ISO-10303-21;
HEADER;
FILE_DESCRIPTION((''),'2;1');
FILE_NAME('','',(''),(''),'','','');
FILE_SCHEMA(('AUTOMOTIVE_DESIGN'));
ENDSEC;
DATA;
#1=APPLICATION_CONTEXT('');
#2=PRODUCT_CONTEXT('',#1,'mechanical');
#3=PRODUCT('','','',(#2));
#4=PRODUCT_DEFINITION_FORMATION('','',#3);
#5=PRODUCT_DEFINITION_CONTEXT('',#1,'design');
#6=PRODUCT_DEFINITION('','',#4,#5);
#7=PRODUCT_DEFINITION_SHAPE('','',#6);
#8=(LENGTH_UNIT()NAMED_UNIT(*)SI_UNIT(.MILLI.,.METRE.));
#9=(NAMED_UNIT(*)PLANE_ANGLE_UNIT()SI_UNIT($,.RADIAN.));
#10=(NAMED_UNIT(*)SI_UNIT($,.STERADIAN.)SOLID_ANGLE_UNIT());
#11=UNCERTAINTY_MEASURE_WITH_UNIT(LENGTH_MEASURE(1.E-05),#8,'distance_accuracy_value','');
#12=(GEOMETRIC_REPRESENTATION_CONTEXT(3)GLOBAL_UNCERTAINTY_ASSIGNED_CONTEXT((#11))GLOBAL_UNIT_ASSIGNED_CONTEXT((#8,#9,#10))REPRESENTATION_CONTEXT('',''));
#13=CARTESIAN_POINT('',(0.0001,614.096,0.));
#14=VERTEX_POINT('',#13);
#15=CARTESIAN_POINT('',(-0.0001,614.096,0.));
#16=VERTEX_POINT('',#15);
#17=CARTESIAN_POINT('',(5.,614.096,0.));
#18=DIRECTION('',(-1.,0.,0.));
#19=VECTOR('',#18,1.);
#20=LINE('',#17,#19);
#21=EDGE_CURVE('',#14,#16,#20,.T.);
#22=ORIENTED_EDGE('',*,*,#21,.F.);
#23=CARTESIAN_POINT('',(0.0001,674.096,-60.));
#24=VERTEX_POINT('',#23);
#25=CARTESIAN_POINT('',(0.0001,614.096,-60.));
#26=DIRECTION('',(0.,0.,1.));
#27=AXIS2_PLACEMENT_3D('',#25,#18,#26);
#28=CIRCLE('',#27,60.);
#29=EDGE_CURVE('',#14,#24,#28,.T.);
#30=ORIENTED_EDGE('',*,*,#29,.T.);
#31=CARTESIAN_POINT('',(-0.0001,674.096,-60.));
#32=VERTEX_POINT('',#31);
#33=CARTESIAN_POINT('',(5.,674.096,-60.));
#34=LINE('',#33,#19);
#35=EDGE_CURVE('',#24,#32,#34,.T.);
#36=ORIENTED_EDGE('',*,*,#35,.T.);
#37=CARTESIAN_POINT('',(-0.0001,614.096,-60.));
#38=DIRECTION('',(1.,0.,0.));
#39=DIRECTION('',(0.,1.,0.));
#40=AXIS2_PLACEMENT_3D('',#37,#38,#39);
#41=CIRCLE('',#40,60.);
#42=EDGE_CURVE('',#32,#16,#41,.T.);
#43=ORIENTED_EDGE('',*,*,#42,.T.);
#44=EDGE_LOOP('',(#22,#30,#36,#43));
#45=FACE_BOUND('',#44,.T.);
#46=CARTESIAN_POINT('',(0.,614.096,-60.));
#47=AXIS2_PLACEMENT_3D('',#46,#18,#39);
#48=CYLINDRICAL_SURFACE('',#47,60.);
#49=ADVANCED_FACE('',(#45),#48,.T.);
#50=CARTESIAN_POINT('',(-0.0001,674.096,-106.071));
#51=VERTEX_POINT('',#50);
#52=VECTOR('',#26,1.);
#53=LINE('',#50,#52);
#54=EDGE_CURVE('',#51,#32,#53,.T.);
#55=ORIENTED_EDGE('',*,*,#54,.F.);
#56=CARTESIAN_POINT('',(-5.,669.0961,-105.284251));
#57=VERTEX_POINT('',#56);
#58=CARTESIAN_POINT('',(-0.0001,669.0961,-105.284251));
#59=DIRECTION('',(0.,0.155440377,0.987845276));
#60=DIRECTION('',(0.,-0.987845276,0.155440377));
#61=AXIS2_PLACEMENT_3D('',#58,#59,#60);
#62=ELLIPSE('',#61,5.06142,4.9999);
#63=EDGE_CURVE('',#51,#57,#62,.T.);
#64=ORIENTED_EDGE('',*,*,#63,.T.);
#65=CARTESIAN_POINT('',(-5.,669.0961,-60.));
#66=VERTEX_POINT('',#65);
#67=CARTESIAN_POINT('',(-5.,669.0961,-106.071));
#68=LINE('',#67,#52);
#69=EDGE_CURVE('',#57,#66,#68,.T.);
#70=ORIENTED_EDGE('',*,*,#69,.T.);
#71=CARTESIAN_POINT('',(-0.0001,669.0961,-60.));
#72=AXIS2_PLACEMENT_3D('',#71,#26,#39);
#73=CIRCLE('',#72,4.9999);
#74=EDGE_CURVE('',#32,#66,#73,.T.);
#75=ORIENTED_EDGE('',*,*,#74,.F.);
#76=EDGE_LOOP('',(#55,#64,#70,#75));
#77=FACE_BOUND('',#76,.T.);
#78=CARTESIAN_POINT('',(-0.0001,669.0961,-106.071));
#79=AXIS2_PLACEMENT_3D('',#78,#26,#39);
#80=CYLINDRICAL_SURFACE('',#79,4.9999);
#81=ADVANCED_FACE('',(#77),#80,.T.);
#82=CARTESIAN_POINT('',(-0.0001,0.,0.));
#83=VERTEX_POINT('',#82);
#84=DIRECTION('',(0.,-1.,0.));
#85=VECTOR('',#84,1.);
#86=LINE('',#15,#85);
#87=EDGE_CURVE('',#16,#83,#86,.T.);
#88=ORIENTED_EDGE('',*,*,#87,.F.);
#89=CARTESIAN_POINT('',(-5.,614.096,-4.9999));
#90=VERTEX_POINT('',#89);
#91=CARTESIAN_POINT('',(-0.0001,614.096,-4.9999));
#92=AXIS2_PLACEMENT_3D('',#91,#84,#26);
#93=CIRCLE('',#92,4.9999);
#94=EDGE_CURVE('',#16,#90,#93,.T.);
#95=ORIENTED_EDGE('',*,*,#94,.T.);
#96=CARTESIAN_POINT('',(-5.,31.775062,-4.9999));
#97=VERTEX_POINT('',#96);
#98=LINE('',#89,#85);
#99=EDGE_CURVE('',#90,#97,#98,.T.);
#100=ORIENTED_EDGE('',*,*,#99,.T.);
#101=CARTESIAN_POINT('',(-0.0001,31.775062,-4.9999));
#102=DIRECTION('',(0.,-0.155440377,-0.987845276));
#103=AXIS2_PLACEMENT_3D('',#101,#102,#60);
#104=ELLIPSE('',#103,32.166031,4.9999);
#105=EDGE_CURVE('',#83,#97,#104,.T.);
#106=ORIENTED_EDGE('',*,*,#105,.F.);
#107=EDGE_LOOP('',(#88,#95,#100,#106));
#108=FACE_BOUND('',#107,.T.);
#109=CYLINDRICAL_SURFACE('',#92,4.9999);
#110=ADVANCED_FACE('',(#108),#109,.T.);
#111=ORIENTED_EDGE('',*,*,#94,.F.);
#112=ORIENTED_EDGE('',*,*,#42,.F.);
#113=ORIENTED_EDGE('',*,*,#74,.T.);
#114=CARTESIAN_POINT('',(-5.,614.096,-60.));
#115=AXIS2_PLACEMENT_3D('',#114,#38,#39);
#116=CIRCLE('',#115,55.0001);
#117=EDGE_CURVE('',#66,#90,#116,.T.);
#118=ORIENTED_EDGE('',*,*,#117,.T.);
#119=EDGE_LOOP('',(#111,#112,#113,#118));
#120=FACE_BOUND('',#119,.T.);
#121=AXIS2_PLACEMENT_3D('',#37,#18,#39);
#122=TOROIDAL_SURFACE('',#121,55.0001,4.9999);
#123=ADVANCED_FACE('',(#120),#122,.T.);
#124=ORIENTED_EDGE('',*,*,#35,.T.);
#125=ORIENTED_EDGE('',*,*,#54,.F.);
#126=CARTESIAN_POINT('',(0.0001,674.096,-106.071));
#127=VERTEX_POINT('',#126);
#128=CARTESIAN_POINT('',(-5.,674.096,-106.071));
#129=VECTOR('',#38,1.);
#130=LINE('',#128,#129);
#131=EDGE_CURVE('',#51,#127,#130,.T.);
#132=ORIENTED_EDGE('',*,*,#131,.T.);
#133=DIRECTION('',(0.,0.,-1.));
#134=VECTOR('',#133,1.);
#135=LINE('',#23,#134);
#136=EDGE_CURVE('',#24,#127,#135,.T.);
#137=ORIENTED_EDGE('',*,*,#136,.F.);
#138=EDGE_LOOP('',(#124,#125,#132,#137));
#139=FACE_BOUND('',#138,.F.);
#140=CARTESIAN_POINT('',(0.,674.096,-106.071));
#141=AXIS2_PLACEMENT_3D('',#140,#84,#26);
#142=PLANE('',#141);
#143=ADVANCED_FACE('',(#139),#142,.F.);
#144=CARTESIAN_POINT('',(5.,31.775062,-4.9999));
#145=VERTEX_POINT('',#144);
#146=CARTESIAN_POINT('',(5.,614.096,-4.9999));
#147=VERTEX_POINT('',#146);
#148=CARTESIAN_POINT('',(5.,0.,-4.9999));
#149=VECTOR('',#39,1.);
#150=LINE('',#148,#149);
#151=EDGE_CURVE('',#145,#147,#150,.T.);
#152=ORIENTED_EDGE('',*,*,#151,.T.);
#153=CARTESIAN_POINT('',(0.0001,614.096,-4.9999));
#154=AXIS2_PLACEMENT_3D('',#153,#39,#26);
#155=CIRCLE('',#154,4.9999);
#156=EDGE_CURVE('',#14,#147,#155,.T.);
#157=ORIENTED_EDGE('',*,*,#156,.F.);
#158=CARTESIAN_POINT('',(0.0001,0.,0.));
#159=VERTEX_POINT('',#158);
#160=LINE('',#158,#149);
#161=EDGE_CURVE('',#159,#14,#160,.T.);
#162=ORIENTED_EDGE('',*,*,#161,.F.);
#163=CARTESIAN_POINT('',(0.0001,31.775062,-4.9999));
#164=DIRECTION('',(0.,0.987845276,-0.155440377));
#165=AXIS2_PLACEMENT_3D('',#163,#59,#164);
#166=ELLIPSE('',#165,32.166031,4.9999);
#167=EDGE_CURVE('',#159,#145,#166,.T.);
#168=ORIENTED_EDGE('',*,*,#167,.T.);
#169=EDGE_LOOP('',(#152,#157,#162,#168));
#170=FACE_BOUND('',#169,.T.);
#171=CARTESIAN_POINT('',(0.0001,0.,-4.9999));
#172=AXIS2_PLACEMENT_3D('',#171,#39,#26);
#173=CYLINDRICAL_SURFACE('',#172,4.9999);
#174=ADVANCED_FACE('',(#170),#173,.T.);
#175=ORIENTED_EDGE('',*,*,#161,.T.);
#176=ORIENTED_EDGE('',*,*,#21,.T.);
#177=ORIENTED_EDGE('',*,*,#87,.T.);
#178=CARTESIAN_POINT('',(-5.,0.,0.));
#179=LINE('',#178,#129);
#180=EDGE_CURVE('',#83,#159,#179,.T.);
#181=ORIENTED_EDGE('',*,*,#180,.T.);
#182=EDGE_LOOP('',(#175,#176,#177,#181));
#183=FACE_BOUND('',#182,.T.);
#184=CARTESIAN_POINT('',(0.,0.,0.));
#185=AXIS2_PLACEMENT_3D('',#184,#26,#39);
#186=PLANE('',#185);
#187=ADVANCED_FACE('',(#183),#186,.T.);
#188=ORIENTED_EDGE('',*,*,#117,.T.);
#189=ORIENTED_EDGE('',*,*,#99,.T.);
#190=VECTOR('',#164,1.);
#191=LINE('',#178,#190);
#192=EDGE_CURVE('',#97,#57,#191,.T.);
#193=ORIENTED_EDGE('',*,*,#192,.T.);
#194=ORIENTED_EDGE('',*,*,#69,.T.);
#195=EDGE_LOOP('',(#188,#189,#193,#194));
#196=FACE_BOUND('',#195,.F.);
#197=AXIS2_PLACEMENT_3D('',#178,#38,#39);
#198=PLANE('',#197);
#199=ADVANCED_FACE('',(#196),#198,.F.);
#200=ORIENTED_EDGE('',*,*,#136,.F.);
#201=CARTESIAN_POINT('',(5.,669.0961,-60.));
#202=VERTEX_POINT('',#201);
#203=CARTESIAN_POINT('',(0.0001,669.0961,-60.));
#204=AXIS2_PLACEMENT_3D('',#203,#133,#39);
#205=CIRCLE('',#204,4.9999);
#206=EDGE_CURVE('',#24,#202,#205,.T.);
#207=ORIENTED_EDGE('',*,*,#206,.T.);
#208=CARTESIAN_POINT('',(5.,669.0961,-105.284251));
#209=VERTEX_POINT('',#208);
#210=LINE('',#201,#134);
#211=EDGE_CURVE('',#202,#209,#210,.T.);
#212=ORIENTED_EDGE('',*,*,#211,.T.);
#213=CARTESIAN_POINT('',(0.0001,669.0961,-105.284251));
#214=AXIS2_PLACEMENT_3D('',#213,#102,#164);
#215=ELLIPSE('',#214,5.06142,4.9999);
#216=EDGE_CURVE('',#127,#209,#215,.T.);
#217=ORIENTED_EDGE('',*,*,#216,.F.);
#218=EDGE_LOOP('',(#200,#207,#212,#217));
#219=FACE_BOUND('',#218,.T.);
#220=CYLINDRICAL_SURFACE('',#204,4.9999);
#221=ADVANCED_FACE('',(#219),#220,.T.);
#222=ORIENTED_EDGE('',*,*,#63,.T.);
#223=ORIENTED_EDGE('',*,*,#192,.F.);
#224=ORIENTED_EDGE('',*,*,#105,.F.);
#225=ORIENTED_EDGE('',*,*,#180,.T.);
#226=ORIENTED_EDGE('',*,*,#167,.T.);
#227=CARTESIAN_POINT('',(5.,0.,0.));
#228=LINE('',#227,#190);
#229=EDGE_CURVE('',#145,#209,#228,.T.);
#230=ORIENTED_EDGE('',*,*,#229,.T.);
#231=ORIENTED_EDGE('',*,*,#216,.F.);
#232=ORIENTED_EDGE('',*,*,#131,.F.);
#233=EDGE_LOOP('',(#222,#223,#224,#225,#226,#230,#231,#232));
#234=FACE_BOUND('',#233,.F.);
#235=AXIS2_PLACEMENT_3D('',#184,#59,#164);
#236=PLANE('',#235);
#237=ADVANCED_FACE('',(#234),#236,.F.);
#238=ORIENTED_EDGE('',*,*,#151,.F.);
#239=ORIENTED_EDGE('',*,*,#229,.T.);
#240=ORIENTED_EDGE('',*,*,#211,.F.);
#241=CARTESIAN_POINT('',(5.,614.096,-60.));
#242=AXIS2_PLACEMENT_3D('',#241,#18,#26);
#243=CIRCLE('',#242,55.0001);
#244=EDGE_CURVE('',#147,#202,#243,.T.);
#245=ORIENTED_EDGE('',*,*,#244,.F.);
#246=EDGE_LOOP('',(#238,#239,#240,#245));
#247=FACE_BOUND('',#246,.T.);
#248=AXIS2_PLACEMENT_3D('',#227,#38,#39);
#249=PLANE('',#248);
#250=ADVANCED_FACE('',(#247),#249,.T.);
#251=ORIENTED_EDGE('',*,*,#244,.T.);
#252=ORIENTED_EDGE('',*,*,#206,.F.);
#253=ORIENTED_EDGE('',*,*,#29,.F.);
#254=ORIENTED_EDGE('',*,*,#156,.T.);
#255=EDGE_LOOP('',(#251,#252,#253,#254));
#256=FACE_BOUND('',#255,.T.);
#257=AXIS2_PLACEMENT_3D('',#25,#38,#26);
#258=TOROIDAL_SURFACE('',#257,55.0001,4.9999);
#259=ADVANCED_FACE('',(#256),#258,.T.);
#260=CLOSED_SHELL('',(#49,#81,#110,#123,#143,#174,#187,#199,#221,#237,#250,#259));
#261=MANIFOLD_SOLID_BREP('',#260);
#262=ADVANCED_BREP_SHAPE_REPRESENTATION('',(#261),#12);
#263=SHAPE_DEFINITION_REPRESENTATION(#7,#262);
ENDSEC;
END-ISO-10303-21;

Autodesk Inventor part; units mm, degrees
sketch "草圖1" plane through (0, 0, 0) normal (1, 0, 0) x (0, 1, 0)
  line L0 (0, 0) -> (674.096, -106.071)
  line L1 (0, 0) -> (614.096, 0)
  line L2 (674.096, -106.071) -> (674.096, -60)
  line L3 (674.096, -106.071) -> (0, -106.071) construction
  line L4 (0, 0) -> (0, -106.071)
  arc A0 (674.096, -60) -> (614.096, 0) centre (614.096, -60) ccw
  dimension "d0" = 106.071
  dimension "d1" = 674.096
  dimension "d2" = 60
extrude "擠出1" add sketch "草圖1" along normal mid plane 10
ref_plane "工作平面1" through (0, 674.096, 0) normal (0, 1, 0) x (-1, 0, 0)
fillet "圓角1" radius 5 6 edges at (-5, 656.5224, -17.5736) (-5, 307.048, 0) (-5, 674.096, -83.0355) (5, 307.048, 0) (5, 674.096, -83.0355) (5, 656.5224, -17.5736)
properties part number "路徑"
